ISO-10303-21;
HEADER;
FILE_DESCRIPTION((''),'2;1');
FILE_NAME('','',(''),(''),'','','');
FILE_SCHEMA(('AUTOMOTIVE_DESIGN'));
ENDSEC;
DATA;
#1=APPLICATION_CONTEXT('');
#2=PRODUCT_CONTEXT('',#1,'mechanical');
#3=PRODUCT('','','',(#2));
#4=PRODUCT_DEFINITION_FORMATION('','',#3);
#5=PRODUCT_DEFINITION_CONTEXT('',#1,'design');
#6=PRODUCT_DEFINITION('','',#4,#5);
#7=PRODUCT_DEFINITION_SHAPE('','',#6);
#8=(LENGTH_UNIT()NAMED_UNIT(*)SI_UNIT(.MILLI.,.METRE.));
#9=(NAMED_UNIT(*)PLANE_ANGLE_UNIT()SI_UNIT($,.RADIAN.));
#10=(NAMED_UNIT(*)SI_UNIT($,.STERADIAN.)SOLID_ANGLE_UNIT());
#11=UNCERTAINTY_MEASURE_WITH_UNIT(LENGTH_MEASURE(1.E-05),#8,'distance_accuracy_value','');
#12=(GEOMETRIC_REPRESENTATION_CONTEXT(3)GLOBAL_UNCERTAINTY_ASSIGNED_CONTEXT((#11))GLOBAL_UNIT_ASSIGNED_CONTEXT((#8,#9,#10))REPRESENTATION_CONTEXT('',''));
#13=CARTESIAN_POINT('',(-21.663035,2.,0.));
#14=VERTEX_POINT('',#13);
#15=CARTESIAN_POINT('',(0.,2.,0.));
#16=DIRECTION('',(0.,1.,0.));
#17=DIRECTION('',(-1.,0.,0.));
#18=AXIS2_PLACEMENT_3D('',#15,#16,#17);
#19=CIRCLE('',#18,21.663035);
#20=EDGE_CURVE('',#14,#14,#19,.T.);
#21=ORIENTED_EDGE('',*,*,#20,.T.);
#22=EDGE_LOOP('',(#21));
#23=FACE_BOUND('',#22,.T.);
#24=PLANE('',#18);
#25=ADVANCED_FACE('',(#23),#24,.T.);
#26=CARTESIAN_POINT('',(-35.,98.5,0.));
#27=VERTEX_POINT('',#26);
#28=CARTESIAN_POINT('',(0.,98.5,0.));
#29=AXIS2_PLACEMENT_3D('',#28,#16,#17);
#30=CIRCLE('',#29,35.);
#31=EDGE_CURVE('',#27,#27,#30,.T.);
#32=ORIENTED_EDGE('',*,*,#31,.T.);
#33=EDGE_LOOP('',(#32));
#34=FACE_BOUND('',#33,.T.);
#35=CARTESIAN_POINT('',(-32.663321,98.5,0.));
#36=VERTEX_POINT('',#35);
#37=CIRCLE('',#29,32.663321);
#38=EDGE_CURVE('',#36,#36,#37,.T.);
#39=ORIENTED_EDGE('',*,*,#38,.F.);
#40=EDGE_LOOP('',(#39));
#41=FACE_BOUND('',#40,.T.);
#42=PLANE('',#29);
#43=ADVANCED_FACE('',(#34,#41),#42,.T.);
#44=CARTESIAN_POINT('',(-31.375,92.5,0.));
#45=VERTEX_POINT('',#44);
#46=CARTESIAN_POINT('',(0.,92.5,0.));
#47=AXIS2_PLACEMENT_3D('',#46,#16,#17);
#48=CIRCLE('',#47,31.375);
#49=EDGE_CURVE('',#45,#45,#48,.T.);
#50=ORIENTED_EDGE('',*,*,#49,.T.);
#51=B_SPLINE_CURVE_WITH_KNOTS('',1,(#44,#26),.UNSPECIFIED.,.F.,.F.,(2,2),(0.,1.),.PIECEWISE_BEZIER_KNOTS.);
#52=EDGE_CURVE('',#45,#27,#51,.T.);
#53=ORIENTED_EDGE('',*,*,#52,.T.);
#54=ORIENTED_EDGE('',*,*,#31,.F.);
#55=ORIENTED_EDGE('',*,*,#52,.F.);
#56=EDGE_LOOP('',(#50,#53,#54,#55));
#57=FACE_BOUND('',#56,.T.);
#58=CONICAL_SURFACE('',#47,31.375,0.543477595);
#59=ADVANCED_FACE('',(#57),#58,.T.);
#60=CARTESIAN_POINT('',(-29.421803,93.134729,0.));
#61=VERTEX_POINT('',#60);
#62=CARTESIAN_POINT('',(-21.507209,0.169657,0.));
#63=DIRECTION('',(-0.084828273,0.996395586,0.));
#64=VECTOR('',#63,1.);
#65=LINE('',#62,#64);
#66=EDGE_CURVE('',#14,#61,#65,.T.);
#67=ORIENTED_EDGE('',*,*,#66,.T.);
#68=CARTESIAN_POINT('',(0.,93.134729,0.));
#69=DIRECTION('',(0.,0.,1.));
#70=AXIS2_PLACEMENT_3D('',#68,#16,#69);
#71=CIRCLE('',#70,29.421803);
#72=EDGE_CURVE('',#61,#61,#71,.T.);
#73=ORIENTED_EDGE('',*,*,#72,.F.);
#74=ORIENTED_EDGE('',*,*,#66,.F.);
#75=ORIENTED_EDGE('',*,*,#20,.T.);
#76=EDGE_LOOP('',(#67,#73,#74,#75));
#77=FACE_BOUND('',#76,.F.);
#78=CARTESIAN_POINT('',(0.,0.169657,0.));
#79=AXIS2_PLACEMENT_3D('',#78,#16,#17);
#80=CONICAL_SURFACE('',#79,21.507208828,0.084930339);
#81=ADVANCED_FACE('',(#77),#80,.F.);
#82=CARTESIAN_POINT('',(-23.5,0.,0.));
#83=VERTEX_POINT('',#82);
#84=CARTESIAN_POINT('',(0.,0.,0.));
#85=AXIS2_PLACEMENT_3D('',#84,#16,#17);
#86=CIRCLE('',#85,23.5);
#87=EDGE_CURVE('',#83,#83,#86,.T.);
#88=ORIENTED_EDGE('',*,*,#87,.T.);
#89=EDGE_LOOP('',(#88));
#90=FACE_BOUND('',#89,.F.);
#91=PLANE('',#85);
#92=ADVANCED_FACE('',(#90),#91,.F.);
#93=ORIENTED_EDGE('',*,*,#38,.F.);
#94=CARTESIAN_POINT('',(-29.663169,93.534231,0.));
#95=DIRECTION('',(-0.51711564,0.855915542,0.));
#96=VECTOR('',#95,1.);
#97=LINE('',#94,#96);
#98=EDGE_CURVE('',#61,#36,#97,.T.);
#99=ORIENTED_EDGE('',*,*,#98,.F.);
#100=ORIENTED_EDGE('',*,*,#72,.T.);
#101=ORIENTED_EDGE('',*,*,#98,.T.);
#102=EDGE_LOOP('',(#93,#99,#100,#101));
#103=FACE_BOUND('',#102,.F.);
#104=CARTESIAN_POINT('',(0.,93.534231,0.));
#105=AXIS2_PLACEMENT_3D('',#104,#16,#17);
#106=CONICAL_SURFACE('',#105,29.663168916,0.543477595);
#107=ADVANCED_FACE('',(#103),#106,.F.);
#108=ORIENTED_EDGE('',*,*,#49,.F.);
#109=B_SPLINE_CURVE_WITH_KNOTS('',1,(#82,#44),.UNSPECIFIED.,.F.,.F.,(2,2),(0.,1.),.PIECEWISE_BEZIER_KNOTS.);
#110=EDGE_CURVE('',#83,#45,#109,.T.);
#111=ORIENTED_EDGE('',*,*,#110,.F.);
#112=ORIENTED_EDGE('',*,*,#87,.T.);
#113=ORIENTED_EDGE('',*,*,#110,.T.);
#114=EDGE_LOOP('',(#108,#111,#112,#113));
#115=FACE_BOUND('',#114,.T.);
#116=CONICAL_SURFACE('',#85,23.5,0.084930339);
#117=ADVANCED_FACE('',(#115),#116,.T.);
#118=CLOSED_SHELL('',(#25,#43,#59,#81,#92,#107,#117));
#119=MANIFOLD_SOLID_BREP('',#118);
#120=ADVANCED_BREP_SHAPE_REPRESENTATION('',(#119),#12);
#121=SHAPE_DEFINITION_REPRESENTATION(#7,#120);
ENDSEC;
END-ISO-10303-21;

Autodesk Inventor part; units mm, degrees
ref_plane "YZ Plane" through (0, 0, 0) normal (1, 0, 0) x (0, 1, 0)
sketch "Sketch1" plane through (0, 0, 0) normal (0, 1, 0) x (-1, 0, 0)
  circle A0 centre (0, 0) radius 23.5
  dimension "d0" = 47
ref_plane "Work Plane1" through (0, 92.5, 0) normal (0, 1, 0) x (-1, 0, 0)
sketch "Sketch2" plane through (0, 92.5, 0) normal (0, 1, 0) x (-1, 0, 0)
  circle A0 centre (0, 0) radius 31.375
  dimension "d2" = 62.75
ref_plane "Work Plane2" through (0, 98.5, 0) normal (0, 1, 0) x (-1, 0, 0)
sketch "Sketch3" plane through (0, 98.5, 0) normal (0, 1, 0) x (-1, 0, 0)
  circle A0 centre (0, 0) radius 35
  dimension "d4" = 70
loft "Loft1" add profiles "Sketch1", "Sketch2"
loft "Loft2" add profiles "Sketch3" section 1 edges at (31.375, 92.5, 0)
shell "Shell1" thickness 2 removed faces 1 at (1.9985, 98.5, 11.019)
properties part number "Cup_Dispenser_Cup"
